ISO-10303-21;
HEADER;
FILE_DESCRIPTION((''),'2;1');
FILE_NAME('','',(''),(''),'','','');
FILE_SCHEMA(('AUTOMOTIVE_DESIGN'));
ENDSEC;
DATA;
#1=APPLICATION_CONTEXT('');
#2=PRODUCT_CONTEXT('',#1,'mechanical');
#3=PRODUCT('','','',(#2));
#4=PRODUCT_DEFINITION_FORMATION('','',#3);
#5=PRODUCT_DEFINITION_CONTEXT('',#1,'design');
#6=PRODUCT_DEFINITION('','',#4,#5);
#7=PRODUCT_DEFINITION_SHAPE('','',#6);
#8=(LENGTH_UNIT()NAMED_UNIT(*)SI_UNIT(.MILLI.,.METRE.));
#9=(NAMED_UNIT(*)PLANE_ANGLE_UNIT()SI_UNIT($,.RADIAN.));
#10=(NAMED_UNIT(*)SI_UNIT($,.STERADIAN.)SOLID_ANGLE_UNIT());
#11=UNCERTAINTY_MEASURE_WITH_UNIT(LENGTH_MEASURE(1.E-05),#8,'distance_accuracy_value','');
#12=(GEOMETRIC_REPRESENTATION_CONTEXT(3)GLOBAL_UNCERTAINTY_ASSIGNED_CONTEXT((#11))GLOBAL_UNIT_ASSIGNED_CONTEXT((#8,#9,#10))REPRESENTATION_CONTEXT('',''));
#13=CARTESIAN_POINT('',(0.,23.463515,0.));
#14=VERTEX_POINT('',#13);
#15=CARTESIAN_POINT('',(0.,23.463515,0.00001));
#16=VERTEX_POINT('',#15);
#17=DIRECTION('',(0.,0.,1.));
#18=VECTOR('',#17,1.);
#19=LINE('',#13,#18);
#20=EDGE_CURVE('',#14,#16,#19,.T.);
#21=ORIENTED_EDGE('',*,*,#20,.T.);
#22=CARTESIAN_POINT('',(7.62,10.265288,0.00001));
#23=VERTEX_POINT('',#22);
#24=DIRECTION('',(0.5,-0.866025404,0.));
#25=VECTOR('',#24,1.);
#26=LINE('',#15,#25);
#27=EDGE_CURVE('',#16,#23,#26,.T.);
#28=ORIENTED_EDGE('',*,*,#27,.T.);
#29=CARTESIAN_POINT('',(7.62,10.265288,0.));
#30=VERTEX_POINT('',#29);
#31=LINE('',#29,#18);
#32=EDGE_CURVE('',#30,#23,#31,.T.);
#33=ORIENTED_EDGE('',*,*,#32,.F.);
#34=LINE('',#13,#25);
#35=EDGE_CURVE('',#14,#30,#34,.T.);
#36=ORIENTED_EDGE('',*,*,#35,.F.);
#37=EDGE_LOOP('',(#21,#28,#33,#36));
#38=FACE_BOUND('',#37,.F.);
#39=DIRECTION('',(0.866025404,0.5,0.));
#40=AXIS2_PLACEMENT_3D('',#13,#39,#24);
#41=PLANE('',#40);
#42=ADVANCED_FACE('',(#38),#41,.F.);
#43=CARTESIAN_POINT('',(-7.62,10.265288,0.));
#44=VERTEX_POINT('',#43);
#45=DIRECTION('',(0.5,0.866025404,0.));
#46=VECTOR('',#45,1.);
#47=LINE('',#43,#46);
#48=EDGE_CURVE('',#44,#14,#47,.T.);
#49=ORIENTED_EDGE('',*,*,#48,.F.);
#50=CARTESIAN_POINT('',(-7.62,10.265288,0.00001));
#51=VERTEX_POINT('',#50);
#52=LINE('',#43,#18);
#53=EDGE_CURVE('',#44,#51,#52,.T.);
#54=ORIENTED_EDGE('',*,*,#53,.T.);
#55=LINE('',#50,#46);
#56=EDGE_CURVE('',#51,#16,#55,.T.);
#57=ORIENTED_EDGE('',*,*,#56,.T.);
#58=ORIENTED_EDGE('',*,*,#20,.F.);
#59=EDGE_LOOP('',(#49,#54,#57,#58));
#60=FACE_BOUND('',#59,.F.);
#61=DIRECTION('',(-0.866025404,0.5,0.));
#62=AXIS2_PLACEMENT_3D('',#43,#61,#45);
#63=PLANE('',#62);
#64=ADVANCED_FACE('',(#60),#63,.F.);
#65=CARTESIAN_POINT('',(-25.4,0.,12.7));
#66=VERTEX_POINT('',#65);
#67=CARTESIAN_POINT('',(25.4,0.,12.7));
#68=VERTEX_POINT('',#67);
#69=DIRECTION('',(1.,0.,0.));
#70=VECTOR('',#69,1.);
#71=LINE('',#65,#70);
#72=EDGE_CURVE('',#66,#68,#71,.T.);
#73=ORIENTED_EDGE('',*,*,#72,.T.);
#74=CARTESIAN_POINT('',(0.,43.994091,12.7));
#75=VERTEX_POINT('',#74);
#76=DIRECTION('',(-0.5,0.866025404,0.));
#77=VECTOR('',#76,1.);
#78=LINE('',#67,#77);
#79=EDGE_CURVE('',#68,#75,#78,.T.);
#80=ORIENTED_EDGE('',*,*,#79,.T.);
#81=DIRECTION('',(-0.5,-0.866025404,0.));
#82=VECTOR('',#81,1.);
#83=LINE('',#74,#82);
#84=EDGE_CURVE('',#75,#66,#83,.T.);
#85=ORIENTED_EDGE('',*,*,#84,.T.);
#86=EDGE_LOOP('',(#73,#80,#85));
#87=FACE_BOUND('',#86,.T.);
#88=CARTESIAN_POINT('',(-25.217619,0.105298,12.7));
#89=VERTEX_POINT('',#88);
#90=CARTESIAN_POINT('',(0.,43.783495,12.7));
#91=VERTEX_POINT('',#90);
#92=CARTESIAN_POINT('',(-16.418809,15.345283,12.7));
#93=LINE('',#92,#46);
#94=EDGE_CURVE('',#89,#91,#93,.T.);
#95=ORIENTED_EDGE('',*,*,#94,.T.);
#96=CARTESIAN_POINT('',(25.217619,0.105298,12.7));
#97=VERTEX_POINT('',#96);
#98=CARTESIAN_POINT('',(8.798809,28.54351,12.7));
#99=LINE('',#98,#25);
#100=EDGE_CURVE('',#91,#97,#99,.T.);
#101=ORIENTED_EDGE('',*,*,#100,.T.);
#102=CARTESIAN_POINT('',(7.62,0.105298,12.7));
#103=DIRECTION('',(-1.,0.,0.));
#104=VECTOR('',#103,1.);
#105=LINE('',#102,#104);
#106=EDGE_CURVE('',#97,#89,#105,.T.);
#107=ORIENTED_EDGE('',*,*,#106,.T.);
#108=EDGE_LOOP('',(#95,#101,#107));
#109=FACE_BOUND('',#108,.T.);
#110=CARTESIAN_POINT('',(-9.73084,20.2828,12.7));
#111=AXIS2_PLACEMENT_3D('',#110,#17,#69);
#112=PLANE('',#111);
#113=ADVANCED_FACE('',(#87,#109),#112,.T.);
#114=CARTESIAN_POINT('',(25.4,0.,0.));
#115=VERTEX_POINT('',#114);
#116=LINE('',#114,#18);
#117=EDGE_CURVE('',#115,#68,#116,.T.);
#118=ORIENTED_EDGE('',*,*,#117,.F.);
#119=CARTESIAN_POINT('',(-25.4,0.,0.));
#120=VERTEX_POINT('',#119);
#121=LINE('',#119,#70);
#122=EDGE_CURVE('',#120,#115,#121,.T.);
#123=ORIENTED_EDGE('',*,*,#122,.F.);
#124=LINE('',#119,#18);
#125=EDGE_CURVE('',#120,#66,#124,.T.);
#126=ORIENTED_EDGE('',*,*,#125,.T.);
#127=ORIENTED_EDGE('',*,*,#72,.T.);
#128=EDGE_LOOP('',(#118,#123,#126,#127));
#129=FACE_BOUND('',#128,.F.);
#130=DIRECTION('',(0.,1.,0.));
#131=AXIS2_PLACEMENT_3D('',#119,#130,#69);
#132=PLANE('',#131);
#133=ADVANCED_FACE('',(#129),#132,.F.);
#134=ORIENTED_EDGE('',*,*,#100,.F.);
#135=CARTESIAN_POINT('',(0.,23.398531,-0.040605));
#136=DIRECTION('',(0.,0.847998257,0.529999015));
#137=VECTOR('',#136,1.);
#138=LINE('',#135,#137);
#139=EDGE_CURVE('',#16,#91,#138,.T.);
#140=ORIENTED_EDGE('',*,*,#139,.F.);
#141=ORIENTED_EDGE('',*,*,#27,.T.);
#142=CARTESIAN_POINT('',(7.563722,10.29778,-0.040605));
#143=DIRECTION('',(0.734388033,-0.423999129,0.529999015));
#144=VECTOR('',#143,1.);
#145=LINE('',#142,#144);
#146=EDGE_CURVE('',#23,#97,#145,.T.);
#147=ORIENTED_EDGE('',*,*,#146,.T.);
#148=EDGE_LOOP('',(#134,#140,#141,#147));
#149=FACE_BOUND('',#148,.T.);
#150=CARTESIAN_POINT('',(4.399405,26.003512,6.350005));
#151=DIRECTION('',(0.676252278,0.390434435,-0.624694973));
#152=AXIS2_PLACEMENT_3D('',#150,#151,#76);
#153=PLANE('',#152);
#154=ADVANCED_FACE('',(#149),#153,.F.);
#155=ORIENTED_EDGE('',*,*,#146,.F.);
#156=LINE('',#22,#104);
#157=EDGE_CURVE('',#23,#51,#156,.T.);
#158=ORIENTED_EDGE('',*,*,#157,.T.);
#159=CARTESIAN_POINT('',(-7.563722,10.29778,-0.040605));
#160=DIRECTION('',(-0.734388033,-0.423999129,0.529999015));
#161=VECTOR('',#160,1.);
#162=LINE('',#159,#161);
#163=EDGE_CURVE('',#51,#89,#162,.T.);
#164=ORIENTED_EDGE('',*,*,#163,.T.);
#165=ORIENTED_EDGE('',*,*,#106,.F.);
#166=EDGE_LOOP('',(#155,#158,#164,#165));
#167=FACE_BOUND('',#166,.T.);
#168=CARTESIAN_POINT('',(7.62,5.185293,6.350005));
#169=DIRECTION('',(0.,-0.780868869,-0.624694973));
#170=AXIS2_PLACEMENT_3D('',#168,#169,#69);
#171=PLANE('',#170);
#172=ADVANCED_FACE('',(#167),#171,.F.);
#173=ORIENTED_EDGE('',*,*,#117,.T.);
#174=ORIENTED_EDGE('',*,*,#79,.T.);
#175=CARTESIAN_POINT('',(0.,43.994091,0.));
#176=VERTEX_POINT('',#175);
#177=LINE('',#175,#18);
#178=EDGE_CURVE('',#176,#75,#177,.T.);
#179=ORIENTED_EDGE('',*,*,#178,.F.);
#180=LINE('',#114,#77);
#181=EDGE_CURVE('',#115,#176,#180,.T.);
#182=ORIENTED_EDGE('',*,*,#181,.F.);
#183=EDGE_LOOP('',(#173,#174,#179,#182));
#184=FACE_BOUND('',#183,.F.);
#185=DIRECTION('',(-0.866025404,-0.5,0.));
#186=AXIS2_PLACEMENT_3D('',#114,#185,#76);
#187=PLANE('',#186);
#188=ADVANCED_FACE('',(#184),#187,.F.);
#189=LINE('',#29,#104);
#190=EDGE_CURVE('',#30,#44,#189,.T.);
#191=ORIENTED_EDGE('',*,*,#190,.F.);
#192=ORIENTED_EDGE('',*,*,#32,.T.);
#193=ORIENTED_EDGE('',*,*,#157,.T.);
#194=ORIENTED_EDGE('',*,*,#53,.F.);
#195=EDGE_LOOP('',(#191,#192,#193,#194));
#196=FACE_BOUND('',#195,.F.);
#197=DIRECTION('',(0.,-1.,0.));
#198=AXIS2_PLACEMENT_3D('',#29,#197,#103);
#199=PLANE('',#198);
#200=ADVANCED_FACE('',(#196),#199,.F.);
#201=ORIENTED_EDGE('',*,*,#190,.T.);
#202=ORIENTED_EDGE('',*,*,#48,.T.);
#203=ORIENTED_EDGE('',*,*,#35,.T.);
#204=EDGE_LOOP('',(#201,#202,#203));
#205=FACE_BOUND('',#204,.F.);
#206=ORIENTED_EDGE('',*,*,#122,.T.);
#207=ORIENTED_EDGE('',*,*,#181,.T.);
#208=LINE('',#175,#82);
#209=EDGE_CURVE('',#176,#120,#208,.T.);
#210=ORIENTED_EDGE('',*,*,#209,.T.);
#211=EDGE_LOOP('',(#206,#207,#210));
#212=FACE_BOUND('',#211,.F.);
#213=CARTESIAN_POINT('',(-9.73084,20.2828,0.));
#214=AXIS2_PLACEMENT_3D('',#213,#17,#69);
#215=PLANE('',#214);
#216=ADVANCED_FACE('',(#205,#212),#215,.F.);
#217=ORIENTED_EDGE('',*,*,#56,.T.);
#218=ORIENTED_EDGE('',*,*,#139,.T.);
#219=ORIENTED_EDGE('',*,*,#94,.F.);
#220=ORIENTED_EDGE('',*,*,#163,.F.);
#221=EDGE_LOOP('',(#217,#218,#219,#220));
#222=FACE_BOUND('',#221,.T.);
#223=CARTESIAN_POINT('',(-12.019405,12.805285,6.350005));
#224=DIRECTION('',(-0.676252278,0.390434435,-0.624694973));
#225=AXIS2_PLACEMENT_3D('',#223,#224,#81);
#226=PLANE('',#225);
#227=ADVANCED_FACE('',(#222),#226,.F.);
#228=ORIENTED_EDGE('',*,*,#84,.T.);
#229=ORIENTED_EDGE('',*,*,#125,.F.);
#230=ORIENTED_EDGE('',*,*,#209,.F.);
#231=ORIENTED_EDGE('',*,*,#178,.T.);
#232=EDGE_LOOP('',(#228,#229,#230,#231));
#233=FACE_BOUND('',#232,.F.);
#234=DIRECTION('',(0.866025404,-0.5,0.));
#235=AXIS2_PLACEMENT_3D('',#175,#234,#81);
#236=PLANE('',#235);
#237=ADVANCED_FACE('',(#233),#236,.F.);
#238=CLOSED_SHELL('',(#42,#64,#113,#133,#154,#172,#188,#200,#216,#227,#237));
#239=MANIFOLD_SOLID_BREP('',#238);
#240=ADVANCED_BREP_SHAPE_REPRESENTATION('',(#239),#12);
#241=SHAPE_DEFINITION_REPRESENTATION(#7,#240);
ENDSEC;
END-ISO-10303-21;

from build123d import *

# Parameters (mm, degrees)
F1_DEPTH = 12.7
F2_SIZE2 = 10.15999
F2_SIZE  = 12.69999


# Not quite as in the source:
# - a fillet or chamfer is up to 0.001 mm smaller than in the source, because OpenCascade refuses the exact size


with BuildPart() as f1:
    # F0 (on Top) → F1 (new body)
    with BuildSketch(Plane.XY):
        Polygon((0, 43.9940905122), (-25.4, 0), (-7.62, 10.2652877862), (0, 23.4635149399), align=None)
        Polygon((7.62, 10.2652877862), (25.4, 0), (0, 43.9940905122), (0, 23.4635149399), align=None)
        Polygon((-7.62, 10.2652877862), (-25.4, 0), (25.4, 0), (7.62, 10.2652877862), align=None)
    extrude(amount=F1_DEPTH)

    # F2 (size 12.7 and 10.16 in the source; OpenCascade refuses exactly that, so slightly less here)
    f2_edges = [f1.edges().sort_by_distance(p)[0] for p in [
        (0, 10.265288, 12.7),
        (-3.81, 16.864401, 12.7),
        (3.81, 16.864401, 12.7),
    ]]
    chamfer(f2_edges, length=F2_SIZE, length2=F2_SIZE2)


solid = f1.part
